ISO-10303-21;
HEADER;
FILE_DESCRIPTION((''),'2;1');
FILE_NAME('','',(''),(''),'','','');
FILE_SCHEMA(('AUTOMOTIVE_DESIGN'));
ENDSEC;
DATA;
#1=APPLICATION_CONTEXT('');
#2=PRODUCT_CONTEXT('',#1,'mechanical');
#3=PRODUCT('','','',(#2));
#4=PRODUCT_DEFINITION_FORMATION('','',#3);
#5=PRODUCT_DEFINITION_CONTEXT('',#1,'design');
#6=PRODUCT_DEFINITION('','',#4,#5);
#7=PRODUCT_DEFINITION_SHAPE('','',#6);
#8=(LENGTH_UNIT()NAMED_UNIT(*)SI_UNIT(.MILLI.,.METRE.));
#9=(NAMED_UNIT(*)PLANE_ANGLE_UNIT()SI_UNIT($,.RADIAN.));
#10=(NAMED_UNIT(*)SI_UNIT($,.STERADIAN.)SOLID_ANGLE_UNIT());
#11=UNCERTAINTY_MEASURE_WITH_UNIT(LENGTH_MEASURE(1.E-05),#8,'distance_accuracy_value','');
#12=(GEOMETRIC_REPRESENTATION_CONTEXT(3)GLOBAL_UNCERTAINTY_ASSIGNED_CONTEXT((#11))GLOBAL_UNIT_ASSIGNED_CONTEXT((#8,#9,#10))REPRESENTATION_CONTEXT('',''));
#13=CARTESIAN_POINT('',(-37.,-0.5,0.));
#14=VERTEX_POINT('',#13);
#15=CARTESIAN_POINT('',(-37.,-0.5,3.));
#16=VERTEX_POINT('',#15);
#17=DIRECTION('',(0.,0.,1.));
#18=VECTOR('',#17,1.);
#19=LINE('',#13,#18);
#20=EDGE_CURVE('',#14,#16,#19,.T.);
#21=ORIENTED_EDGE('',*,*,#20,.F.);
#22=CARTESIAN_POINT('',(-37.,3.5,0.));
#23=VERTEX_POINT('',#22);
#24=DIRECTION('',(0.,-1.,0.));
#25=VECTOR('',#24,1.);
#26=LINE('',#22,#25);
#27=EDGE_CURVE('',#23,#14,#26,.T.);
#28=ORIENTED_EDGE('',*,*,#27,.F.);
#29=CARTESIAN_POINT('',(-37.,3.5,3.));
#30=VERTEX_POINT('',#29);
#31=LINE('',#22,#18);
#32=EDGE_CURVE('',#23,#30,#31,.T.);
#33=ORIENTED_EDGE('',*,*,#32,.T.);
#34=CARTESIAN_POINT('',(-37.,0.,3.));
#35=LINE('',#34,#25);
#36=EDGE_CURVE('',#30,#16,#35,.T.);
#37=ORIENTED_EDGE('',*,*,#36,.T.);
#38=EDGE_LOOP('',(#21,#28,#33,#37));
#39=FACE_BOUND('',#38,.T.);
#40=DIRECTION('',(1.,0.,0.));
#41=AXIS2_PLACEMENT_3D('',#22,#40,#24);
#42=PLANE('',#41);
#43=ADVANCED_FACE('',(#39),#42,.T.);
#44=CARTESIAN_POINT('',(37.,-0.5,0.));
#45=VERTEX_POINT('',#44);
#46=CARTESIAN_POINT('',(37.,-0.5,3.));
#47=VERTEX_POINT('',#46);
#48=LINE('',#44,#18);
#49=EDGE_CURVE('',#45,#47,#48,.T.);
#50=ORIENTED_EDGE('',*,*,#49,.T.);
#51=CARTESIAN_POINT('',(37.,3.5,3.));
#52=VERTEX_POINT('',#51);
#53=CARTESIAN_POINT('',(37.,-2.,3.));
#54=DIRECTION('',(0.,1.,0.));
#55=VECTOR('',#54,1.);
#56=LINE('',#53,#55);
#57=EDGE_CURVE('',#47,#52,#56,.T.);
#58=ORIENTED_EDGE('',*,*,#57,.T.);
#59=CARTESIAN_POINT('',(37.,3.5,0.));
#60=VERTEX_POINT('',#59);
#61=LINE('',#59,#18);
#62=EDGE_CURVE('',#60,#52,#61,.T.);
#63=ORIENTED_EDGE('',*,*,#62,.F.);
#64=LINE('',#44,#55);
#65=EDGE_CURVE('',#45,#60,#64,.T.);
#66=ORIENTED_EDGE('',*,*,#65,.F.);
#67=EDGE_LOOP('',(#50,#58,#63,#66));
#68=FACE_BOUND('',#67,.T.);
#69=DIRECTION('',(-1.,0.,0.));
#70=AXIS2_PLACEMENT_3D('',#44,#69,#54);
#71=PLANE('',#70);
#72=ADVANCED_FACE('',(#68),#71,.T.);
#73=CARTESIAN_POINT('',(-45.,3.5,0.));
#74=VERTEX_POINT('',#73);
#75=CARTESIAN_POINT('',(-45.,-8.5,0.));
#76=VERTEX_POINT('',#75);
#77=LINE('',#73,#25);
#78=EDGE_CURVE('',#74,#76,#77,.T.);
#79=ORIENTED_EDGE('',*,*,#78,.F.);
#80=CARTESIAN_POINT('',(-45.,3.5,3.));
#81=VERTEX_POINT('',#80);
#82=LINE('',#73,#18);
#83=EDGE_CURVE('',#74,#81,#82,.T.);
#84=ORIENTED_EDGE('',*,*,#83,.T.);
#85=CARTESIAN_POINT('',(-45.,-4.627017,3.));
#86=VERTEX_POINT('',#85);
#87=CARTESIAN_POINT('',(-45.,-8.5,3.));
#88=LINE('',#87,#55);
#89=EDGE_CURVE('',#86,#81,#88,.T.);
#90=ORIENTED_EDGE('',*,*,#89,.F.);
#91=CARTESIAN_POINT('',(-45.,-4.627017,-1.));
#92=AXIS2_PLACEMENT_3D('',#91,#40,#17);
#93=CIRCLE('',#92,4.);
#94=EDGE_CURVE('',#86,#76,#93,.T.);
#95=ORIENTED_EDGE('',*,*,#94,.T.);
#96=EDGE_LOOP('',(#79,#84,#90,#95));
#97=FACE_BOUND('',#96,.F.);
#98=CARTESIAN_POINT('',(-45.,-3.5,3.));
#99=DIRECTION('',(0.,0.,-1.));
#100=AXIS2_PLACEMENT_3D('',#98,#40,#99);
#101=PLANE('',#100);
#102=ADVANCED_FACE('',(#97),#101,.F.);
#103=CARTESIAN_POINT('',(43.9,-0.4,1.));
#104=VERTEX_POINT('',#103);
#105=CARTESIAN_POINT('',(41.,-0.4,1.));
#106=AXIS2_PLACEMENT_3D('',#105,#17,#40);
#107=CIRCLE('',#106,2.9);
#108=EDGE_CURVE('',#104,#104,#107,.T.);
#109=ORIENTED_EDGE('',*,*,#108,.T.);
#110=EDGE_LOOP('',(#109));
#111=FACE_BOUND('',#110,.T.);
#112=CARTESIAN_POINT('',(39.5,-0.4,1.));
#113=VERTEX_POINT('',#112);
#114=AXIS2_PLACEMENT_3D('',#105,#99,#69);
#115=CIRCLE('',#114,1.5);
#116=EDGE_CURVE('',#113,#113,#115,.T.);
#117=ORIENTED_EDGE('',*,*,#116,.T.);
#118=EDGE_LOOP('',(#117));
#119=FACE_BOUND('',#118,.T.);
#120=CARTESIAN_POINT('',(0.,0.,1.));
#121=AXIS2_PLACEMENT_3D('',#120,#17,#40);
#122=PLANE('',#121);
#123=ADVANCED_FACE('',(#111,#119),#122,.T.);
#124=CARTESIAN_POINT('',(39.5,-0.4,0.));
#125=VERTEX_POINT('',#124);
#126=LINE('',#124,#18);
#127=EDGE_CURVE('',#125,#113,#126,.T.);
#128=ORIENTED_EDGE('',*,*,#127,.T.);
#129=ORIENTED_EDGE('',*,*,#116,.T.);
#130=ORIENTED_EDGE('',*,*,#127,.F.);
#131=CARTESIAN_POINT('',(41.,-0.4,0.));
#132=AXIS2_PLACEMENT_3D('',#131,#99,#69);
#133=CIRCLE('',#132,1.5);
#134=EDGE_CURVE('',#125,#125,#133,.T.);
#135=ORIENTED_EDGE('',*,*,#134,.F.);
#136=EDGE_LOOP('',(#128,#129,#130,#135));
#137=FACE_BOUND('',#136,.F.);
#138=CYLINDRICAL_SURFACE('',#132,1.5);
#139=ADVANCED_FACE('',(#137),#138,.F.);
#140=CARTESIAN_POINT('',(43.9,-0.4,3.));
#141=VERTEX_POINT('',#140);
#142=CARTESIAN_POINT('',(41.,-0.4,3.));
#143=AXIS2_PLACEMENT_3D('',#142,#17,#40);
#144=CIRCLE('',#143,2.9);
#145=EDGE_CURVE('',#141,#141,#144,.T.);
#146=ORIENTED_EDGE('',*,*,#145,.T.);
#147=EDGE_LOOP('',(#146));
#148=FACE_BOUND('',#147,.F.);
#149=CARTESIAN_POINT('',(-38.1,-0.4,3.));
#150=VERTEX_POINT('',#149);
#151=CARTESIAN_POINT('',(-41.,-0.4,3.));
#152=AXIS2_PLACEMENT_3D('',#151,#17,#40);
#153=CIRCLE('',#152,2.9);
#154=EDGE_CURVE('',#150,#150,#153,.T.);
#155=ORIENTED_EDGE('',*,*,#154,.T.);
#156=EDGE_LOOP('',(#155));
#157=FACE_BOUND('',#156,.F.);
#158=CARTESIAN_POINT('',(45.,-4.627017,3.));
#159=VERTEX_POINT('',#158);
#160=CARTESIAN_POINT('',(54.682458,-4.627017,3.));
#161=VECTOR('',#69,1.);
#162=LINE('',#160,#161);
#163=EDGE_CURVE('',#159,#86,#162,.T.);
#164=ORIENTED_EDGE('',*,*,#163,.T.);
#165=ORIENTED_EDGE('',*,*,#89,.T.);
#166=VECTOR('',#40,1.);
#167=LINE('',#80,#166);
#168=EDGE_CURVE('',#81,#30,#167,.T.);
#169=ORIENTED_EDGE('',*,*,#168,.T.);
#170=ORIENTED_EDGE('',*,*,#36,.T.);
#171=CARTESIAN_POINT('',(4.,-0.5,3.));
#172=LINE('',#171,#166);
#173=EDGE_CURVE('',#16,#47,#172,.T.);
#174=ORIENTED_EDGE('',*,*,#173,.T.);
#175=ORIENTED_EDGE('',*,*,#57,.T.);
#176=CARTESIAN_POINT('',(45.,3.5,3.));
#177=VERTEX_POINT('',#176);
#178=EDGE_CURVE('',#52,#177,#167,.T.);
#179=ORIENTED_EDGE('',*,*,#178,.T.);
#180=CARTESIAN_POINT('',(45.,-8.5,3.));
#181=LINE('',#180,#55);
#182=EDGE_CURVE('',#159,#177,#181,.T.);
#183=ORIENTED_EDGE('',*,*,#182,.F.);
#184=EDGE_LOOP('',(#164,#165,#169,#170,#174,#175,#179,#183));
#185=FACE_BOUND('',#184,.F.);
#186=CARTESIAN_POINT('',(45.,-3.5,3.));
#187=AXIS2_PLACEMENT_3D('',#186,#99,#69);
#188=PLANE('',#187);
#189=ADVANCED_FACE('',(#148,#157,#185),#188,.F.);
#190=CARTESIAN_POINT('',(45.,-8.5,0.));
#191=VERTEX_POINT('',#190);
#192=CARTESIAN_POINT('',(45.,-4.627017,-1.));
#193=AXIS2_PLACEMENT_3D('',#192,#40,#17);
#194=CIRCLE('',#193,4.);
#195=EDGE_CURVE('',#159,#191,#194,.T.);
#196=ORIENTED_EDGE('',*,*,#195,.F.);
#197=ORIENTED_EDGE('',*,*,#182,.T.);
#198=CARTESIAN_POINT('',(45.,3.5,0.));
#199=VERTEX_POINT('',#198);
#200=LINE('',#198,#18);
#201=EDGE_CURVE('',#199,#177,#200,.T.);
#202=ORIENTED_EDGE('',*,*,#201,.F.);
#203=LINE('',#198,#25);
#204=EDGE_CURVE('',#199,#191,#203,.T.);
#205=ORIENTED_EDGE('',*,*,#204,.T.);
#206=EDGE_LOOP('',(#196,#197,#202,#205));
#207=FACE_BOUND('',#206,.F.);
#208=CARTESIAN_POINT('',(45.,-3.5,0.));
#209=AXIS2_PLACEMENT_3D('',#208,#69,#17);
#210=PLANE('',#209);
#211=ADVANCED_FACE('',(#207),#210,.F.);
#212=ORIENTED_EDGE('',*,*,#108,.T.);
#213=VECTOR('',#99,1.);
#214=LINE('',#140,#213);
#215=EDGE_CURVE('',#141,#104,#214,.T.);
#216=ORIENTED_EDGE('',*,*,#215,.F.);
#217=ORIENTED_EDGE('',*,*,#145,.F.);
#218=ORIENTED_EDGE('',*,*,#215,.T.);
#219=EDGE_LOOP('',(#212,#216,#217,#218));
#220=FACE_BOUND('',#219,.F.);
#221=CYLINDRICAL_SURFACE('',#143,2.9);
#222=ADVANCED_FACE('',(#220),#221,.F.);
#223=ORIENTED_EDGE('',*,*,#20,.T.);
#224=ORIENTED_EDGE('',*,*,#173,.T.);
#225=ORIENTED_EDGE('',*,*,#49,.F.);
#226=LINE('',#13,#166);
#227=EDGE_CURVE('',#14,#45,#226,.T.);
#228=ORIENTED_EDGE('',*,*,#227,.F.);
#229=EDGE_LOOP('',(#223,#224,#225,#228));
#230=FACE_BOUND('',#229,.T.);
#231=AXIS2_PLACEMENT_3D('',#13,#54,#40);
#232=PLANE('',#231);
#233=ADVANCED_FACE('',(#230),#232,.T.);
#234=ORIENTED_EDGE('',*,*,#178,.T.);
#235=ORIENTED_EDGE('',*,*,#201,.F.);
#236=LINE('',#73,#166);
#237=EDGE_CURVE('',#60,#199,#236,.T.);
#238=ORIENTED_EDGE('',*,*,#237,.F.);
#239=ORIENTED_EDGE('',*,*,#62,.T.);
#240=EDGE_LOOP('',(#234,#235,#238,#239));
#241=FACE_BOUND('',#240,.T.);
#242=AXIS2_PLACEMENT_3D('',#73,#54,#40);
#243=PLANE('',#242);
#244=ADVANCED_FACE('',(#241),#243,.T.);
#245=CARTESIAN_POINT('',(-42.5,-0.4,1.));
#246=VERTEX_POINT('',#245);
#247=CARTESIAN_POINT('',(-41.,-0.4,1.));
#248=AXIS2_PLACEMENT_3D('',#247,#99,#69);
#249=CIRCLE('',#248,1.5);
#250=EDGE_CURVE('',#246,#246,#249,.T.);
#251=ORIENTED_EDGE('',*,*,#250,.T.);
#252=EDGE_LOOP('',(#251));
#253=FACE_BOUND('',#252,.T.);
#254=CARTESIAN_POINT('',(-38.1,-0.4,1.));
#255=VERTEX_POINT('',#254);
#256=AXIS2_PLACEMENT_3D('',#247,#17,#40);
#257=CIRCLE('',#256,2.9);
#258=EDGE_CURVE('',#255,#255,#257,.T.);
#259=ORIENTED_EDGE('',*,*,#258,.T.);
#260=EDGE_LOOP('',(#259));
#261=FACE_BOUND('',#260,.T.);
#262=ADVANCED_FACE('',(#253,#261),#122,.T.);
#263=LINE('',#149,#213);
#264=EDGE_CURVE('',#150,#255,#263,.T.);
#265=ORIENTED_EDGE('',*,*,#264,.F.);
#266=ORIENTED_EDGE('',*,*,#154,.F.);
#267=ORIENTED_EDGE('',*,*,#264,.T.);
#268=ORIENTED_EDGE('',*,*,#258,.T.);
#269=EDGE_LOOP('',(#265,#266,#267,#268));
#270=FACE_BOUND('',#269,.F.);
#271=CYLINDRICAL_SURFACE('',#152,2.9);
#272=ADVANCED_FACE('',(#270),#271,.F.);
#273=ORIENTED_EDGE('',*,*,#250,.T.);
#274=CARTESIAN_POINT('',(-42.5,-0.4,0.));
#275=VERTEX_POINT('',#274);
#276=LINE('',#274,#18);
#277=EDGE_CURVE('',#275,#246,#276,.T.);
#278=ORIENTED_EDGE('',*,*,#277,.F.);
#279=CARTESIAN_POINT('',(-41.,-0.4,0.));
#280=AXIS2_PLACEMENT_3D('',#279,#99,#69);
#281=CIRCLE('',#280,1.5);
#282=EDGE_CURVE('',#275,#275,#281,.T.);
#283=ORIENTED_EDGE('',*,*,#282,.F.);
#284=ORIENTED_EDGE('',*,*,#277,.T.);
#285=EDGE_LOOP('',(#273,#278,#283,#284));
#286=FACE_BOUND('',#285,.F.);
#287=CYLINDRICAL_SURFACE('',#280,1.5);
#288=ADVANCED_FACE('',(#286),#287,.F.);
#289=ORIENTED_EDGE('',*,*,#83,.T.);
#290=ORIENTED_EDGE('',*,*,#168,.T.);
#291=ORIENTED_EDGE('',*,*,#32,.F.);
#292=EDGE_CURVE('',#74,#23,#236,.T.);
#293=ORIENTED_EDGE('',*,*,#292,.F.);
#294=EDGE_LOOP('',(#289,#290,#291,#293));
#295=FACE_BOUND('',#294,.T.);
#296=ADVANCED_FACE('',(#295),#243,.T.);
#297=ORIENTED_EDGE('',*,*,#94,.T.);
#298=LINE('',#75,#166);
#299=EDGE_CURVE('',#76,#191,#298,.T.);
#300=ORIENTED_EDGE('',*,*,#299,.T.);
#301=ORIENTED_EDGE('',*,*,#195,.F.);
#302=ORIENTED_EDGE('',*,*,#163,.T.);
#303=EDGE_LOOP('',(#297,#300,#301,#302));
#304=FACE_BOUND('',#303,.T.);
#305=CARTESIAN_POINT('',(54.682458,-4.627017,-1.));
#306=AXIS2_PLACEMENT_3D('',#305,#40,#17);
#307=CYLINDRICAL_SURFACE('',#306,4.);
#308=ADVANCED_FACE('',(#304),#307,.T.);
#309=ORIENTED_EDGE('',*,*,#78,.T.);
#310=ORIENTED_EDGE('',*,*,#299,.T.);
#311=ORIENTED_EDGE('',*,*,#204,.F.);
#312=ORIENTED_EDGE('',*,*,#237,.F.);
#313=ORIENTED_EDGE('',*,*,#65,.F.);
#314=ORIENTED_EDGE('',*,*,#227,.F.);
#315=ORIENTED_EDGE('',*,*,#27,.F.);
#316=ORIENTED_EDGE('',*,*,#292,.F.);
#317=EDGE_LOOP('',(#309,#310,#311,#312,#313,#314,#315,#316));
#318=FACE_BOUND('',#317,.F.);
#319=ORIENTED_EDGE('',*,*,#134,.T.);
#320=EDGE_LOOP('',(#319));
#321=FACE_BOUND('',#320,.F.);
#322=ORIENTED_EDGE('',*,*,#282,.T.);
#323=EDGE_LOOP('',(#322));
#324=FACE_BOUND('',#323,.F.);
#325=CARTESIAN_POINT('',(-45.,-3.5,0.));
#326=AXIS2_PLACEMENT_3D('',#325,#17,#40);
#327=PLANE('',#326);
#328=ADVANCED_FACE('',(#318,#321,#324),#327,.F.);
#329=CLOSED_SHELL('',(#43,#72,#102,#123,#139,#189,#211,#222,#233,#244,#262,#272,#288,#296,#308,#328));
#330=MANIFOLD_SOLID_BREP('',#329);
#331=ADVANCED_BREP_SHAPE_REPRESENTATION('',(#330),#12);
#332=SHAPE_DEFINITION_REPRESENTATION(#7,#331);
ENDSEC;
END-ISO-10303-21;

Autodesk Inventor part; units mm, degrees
ref_plane "YZ Plane" through (0, 0, 0) normal (1, 0, 0) x (0, 1, 0)
ref_plane "XZ Plane" through (0, 0, 0) normal (0, 1, 0) x (-1, 0, 0)
ref_plane "XY Plane" through (0, 0, 0) normal (0, 0, 1) x (1, 0, 0)
sketch "スケッチ1" plane through (0, 0, 0) normal (0, 0, 1) x (1, 0, 0)
  line L0 (-45, 3.5) -> (45, 3.5)
  line L1 (45, 3.5) -> (45, -3.5)
  line L2 (45, -3.5) -> (-45, -3.5)
  line L3 (-45, -3.5) -> (-45, 3.5)
  line L4 (-45, 3.5) -> (45, -3.5) construction
  line L5 (45, 3.5) -> (-45, -3.5) construction
  point P0 (0, 0)
  dimension "d0" = 90
  dimension "d1" = 7
extrude "押し出し1" add sketch "スケッチ1" along normal blind 3
sketch "スケッチ2" plane through (0, 0, 3) normal (0, 0, 1) x (1, 0, 0)
  circle A0 centre (-41, -0.4) radius 2.9
  circle A1 centre (41, -0.4) radius 2.9
  line L0 (45, 3.5) -> (-45, 3.5) projected
  line L1 (45, -3.5) -> (45, 3.5) projected
  point P0 (0, 0)
  dimension "d4" = 5.8
  dimension "d5" = 5.8
  dimension "d7" = 3.9
  dimension "d8" = 3.9
  dimension "d9" = 82
  dimension "d10" = 4
extrude "押し出し2" cut sketch "スケッチ2" against normal blind 2
sketch "スケッチ3" plane through (0, 0, 0) normal (0, 0, -1) x (-1, 0, 0)
  circle A0 centre (41, -0.4) radius 1.5
  circle A1 centre (-41, -0.4) radius 1.5
  line L0 (45, -3.5) -> (45, 3.5) projected
  line L1 (-45, 3.5) -> (-45, -3.5) projected
  line L2 (45, 3.5) -> (-45, 3.5) projected
  point P0 (0, 0)
  dimension "d13" = 3
  dimension "d14" = 3
  dimension "d15" = 4
  dimension "d16" = 4
  dimension "d17" = 3.9
  dimension "d18" = 3.9
extrude "押し出し3" cut sketch "スケッチ3" against normal blind 2
sketch "スケッチ4" plane through (-45, -3.5, 0) normal (0, -1, 0) x (1, 0, 0)
  line L0 (0, 0) -> (90, 0)
  line L1 (90, 0) -> (90, 3)
  line L2 (90, 3) -> (0, 3)
  line L3 (0, 3) -> (0, 0)
  point P0 (45, 0)
extrude "押し出し4" add sketch "スケッチ4" along normal blind 5
fillet "フィレット1" radius 4 1 edges at (0, -8.5, 3)
sketch "スケッチ6" plane through (0, 0, 0) normal (0, 0, -1) x (-1, 0, 0)
  line L0 (37, -0.5) -> (-37, -0.5)
  line L1 (-37, -0.5) -> (-37, 3.5)
  line L2 (-37, 3.5) -> (37, 3.5)
  line L3 (37, 3.5) -> (37, -0.5)
  line L4 (45, -8.5) -> (45, 3.5) projected
  line L5 (45, 3.5) -> (-45, 3.5) projected
  point P0 (0, 0)
  dimension "d24" = 74
  dimension "d25" = 8
  dimension "d26" = 0
  dimension "d27" = 4
extrude "押し出し5" cut sketch "スケッチ6" against normal blind 10
properties part number "LineTraceCover"
